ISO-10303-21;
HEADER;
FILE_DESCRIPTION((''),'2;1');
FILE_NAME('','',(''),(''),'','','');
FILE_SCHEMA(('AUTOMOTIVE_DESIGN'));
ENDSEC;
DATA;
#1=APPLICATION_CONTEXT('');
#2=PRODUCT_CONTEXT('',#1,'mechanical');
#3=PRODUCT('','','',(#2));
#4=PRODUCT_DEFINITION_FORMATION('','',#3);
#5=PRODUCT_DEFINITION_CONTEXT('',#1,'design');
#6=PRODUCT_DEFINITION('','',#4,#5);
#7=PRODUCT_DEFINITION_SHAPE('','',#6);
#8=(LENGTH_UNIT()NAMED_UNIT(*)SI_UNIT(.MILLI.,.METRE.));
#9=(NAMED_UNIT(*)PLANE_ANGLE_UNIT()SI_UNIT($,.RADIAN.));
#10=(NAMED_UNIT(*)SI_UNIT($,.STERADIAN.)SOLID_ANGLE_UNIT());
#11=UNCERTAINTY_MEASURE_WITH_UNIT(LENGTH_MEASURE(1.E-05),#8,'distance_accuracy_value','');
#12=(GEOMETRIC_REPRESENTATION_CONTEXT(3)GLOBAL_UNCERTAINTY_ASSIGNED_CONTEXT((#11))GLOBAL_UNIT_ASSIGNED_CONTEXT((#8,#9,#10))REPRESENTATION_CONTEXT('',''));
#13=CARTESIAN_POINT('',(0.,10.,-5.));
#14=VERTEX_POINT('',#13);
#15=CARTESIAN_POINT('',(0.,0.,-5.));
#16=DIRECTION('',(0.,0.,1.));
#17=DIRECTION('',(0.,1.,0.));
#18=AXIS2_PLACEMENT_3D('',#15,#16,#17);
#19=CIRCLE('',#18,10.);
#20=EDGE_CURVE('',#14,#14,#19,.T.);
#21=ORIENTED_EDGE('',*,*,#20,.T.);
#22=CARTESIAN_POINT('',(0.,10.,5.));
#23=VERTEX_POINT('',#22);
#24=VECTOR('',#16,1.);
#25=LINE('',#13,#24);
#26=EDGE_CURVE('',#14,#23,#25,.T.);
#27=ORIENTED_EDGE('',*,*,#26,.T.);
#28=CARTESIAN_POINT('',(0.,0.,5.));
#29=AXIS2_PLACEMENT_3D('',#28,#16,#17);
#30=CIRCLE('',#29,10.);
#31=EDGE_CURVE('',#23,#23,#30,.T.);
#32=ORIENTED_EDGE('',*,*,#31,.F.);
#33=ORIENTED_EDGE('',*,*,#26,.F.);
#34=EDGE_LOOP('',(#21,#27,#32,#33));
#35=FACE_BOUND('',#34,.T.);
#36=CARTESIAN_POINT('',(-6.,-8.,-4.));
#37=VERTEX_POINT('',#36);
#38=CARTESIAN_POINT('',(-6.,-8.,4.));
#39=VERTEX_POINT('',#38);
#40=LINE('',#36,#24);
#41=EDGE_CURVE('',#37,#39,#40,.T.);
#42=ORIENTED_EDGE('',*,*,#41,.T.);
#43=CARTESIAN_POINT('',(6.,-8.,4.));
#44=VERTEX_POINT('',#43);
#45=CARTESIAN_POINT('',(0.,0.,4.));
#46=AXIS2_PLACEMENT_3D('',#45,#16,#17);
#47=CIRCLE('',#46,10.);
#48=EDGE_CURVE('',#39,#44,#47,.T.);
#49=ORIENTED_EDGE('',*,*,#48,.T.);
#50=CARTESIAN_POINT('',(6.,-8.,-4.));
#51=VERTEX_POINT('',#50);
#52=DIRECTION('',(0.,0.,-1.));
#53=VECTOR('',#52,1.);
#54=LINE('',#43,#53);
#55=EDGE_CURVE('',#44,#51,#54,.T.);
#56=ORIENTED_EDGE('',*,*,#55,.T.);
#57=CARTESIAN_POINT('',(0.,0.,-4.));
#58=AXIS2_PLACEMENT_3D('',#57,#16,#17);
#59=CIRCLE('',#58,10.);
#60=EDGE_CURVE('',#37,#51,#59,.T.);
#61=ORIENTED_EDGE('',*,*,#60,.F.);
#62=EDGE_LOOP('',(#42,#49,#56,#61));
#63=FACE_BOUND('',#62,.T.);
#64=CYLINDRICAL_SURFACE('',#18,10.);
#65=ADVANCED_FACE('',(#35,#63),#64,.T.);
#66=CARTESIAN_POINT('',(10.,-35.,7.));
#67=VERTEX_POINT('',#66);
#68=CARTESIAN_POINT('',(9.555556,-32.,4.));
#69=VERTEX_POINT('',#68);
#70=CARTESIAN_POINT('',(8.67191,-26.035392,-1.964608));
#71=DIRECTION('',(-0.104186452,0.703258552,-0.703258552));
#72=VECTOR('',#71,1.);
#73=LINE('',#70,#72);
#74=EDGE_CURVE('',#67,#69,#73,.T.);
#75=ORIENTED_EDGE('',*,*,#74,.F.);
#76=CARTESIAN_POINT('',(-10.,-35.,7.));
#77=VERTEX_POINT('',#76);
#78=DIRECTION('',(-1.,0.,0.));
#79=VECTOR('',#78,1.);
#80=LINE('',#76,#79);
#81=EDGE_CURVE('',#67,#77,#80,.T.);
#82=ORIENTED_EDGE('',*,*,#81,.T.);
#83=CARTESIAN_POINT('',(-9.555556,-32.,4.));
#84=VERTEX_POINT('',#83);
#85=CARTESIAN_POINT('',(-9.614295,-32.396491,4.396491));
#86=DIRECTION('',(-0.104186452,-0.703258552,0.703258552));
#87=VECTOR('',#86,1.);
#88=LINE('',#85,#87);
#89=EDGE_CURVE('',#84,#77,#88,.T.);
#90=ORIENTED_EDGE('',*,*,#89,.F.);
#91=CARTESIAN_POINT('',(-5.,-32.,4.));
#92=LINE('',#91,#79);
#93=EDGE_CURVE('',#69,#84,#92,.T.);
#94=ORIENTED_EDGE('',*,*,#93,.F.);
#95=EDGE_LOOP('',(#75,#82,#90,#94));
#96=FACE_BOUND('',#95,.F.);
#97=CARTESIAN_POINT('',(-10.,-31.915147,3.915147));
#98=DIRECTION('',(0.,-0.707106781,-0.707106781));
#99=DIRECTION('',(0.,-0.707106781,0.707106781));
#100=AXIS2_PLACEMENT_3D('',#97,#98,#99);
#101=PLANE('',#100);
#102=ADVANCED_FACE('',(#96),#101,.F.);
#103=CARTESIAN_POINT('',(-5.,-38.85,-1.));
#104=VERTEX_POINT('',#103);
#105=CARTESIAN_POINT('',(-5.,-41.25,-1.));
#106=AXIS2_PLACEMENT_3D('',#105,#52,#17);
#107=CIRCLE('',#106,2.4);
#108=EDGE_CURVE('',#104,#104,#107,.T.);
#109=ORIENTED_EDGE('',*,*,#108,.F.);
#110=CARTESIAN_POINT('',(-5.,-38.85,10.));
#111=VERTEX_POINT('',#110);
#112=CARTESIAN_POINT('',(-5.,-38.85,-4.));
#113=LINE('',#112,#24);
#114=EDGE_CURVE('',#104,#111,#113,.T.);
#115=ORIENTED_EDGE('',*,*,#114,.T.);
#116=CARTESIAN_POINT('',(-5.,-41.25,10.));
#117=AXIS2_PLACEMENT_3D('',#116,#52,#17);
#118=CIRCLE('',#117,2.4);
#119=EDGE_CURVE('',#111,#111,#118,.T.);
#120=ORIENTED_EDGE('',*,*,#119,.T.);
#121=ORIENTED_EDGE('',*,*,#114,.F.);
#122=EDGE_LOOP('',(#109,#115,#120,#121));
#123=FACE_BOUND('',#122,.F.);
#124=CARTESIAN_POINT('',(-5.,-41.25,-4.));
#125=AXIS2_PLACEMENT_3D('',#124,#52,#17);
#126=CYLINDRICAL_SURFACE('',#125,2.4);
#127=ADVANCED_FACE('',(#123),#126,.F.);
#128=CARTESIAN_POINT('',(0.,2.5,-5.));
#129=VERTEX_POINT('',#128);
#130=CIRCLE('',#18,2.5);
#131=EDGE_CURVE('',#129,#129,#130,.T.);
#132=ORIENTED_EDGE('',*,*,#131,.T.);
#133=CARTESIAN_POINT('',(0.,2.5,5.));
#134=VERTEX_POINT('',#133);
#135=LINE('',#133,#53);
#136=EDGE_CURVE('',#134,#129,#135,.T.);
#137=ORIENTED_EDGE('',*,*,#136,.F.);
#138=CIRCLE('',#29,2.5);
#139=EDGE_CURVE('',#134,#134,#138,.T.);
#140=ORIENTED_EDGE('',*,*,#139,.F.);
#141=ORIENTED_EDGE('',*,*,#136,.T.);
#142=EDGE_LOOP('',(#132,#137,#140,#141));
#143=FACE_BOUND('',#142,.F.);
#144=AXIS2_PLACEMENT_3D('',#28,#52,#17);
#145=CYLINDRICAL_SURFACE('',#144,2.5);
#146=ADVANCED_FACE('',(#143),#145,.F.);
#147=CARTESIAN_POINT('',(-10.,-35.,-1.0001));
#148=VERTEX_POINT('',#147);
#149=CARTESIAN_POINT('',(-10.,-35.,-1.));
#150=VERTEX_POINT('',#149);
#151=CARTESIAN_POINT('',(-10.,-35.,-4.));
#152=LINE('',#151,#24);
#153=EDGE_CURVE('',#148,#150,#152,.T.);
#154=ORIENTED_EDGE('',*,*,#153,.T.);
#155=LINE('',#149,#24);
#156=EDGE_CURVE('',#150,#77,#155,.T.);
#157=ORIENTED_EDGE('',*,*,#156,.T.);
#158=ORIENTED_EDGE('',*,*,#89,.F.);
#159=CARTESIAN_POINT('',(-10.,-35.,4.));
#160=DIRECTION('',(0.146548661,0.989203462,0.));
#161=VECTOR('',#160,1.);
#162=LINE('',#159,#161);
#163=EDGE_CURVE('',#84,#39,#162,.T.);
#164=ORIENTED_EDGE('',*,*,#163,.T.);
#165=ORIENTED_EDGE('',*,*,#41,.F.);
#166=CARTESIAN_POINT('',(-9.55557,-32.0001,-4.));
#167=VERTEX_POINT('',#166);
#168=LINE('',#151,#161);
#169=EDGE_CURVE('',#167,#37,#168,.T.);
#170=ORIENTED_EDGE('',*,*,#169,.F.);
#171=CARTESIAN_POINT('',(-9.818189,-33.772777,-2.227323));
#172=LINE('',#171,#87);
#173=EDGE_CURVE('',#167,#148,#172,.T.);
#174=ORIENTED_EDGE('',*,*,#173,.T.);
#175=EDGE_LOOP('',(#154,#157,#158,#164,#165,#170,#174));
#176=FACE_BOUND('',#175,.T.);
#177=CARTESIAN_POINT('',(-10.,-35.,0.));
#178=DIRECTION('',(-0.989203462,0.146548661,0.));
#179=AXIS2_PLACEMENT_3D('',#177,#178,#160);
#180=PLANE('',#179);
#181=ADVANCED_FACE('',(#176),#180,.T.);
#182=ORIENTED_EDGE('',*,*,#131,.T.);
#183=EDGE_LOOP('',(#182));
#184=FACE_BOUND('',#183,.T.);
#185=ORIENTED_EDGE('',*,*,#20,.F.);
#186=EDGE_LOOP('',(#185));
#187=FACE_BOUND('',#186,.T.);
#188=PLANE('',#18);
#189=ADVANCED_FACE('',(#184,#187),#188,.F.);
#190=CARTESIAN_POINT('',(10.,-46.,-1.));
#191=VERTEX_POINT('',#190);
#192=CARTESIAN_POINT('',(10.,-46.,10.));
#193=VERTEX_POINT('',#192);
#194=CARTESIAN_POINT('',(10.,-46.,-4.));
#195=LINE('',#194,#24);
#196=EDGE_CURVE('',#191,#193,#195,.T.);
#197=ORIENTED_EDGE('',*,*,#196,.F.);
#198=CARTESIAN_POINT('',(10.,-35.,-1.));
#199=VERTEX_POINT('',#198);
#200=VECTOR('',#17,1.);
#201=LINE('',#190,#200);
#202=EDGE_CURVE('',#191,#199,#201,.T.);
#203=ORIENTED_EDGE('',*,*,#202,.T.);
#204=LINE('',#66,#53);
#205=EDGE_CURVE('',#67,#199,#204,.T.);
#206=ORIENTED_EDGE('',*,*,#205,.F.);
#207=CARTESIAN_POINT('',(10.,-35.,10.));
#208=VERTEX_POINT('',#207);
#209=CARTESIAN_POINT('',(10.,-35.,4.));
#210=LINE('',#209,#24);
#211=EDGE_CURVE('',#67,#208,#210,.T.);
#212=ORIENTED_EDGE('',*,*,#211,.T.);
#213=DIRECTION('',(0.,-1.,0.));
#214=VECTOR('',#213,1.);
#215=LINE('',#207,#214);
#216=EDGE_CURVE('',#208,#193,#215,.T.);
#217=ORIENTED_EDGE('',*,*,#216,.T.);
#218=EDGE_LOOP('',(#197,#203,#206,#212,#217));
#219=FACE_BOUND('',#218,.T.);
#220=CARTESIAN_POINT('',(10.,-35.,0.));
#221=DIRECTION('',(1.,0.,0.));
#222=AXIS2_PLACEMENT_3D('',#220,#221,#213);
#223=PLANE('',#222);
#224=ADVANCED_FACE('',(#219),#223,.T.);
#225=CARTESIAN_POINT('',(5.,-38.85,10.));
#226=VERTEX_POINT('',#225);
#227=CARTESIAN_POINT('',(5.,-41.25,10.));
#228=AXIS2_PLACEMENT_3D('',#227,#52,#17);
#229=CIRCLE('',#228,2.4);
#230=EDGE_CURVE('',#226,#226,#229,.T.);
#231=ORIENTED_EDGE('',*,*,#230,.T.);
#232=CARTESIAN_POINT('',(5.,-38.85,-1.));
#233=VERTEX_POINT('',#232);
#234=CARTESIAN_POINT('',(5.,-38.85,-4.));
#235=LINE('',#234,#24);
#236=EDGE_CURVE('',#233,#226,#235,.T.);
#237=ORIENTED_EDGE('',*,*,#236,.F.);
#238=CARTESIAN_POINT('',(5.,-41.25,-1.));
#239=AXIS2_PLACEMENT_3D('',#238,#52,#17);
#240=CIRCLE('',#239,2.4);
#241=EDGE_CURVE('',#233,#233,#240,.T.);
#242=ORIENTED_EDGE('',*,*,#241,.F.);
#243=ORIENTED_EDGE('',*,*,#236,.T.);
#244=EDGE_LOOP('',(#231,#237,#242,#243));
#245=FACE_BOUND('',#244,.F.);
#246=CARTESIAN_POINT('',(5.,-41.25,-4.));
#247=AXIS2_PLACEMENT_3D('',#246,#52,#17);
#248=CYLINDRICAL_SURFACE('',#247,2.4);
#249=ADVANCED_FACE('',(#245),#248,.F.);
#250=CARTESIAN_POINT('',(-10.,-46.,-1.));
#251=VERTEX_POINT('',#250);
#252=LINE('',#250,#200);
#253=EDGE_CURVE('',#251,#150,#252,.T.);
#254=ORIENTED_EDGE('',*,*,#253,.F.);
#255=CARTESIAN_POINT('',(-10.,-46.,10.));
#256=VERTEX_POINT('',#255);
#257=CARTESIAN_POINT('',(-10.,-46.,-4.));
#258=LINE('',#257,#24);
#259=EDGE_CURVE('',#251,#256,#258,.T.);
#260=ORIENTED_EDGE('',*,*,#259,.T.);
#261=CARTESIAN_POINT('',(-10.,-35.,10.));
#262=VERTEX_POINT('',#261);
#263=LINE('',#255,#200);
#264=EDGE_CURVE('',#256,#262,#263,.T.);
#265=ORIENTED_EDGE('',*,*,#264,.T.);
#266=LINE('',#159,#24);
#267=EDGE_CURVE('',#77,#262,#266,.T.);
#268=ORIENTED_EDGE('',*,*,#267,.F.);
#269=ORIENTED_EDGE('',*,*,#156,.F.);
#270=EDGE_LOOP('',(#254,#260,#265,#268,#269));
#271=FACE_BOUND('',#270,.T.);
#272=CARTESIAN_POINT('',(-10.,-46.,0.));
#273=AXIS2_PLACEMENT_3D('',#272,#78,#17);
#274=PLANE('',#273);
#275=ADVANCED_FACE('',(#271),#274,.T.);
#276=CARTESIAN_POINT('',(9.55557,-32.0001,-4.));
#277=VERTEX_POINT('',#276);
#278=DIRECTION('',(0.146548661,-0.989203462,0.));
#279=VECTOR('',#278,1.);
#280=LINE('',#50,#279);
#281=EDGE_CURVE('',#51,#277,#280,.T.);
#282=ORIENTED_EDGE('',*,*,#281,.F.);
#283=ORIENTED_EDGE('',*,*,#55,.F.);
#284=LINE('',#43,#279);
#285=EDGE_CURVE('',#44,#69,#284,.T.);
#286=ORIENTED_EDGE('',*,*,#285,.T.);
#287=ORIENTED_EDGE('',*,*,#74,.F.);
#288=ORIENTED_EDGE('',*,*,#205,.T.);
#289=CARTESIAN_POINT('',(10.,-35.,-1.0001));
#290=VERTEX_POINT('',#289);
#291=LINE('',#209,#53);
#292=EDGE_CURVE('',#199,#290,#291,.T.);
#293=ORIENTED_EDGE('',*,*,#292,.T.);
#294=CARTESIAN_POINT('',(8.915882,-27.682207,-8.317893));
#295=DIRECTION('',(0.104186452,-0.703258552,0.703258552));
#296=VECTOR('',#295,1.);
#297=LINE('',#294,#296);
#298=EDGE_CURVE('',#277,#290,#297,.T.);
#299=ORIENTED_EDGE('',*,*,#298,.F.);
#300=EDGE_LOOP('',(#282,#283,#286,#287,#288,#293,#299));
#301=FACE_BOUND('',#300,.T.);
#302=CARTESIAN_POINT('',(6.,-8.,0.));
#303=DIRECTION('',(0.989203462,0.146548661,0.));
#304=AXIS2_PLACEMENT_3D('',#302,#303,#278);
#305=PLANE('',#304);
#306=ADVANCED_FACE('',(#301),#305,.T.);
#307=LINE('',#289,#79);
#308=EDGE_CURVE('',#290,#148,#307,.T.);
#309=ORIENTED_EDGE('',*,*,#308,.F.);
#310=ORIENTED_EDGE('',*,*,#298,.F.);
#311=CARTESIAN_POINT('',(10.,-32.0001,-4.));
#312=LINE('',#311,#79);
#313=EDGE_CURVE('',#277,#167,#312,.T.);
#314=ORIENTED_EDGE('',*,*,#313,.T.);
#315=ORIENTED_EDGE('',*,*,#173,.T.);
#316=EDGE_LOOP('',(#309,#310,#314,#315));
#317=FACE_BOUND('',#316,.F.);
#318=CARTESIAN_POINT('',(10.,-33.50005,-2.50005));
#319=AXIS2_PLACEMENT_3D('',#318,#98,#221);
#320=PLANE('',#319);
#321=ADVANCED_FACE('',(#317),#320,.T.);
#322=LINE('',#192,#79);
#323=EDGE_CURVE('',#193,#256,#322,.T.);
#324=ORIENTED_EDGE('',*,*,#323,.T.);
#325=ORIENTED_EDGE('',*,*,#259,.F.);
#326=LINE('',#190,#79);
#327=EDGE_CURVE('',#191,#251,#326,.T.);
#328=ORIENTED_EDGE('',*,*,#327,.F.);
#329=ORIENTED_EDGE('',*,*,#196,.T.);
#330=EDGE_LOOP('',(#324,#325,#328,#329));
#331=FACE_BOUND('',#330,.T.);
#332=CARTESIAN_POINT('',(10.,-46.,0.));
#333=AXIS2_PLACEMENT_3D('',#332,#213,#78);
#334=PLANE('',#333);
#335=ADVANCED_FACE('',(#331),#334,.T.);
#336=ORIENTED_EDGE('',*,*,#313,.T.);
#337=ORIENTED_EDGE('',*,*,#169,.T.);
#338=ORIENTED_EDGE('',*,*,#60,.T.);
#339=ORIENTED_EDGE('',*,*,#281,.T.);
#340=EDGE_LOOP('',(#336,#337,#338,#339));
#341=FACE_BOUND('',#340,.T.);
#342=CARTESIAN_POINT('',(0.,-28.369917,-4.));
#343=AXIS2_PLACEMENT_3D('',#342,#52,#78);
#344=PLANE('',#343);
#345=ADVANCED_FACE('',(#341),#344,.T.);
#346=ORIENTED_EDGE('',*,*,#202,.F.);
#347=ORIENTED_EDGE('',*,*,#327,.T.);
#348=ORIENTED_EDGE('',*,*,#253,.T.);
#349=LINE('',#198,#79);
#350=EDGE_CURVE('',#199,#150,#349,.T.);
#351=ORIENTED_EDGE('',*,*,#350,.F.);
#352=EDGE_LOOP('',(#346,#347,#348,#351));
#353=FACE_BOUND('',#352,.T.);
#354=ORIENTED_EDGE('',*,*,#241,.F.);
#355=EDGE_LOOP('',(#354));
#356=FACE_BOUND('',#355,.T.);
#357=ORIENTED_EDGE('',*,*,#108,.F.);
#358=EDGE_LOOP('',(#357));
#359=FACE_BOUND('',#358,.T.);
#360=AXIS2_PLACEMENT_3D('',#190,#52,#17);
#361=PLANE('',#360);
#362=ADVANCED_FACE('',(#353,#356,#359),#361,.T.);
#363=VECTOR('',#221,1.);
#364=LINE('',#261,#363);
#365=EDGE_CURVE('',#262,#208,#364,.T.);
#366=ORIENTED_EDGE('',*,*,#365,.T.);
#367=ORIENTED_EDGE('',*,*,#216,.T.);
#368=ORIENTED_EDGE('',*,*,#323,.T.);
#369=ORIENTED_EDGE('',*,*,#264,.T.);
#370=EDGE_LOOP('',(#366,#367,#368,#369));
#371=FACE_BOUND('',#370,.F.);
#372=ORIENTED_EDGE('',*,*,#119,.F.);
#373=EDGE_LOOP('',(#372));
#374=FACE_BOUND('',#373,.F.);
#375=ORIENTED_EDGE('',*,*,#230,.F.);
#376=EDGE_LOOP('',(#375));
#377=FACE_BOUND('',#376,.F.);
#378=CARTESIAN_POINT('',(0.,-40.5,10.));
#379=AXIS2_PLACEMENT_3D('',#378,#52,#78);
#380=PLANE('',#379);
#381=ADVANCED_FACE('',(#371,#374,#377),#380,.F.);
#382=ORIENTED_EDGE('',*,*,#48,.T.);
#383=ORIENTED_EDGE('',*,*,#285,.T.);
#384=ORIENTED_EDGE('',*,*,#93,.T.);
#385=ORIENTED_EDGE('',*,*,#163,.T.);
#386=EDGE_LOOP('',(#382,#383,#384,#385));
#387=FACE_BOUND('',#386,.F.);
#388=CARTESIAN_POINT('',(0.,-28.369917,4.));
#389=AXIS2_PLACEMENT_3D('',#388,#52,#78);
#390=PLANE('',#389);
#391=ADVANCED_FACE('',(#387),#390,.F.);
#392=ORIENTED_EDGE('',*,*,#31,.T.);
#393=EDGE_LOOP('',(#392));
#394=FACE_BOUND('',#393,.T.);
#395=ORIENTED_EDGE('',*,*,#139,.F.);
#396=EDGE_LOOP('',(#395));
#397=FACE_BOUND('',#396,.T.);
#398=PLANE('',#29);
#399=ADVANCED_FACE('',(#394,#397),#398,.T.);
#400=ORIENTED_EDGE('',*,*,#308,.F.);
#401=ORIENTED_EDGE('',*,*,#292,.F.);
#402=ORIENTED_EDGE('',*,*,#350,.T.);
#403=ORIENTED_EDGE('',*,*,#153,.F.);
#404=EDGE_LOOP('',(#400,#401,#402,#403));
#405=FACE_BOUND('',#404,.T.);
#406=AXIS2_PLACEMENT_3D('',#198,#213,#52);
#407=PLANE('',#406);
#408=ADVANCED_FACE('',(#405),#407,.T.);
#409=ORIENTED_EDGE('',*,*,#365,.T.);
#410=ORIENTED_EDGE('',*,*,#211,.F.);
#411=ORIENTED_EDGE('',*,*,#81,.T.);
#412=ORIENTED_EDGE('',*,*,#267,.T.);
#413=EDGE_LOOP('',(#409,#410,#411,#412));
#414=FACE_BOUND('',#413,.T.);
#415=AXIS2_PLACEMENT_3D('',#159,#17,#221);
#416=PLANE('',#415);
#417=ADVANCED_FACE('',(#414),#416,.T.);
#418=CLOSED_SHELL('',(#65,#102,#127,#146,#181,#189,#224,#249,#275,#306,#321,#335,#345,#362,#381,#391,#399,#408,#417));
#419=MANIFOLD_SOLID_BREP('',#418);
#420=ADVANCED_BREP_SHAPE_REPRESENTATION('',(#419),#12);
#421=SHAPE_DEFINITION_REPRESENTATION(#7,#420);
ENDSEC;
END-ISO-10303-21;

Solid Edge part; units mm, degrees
sketch "Sketch1" plane through (0, 0, 0) normal (1, 0, 0) x (0, 1, 0)
  line L0 (2.5, 5) -> (2.5, -5)
  line L1 (2.5, -5) -> (10, -5)
  line L2 (10, -5) -> (10, 5)
  line L3 (10, 5) -> (2.5, 5)
  dimension "D1" = 10
revolve "RevolvedProtrusion1" add sketch "Sketch1" angle 360 about axis through (0, 0, -57) along (0, 0, 1)
sketch "Sketch2" plane through (0, 0, 0) normal (0, 0, 1) x (1, 0, 0)
  line L0 (-6, -8) -> (6, -8)
  line L1 (6, -8) -> (10, -35)
  line L2 (10, -35) -> (10, -46)
  line L3 (10, -46) -> (-10, -46)
  line L4 (-10, -46) -> (-10, -35)
  line L5 (-10, -35) -> (-6, -8)
  dimension "D1" = 20
  dimension "D2" = 12
  dimension "D3" = 35
  dimension "D4" = 46
extrude "Protrusion1" add sketch "Sketch2" along normal mid plane 8
sketch "Sketch3" plane through (0, -29, 4) normal (0, 0, 1) x (1, 0, 0)
  line L0 (-10, -17) -> (-10, -6)
  line L1 (-10, -6) -> (10, -6)
  line L2 (10, -6) -> (10, -17)
  line L3 (10, -17) -> (-10, -17)
extrude "ExtrudedProtrusion_2" add sketch "Sketch3" along normal blind 6
hole "Hole_1" at (5, -41.25, -4) direction (0, 0, 1) diameter 4.8 end up to next
hole "Hole1" at (-5, -41.25, -4) direction (0, 0, 1) diameter 4.8 end up to next
sketch "Sketch4" plane through (10, -42.5, 0) normal (1, 0, 0) x (0, 0, -1)
  line L0 (1, -3.5) -> (1, 7.5)
  line L1 (1, 7.5) -> (4, 7.5)
  line L2 (4, 7.5) -> (4, -3.5)
  line L3 (4, -3.5) -> (1, -3.5)
  dimension "D1" = 3
extrude "Cutout1" cut sketch "Sketch4" against normal up to next
chamfer "Chamfer1" distance 3 angle 45 2 edges at (0, -35, -4) (0, -35, 4)
properties material "Polyethylene, low density"
